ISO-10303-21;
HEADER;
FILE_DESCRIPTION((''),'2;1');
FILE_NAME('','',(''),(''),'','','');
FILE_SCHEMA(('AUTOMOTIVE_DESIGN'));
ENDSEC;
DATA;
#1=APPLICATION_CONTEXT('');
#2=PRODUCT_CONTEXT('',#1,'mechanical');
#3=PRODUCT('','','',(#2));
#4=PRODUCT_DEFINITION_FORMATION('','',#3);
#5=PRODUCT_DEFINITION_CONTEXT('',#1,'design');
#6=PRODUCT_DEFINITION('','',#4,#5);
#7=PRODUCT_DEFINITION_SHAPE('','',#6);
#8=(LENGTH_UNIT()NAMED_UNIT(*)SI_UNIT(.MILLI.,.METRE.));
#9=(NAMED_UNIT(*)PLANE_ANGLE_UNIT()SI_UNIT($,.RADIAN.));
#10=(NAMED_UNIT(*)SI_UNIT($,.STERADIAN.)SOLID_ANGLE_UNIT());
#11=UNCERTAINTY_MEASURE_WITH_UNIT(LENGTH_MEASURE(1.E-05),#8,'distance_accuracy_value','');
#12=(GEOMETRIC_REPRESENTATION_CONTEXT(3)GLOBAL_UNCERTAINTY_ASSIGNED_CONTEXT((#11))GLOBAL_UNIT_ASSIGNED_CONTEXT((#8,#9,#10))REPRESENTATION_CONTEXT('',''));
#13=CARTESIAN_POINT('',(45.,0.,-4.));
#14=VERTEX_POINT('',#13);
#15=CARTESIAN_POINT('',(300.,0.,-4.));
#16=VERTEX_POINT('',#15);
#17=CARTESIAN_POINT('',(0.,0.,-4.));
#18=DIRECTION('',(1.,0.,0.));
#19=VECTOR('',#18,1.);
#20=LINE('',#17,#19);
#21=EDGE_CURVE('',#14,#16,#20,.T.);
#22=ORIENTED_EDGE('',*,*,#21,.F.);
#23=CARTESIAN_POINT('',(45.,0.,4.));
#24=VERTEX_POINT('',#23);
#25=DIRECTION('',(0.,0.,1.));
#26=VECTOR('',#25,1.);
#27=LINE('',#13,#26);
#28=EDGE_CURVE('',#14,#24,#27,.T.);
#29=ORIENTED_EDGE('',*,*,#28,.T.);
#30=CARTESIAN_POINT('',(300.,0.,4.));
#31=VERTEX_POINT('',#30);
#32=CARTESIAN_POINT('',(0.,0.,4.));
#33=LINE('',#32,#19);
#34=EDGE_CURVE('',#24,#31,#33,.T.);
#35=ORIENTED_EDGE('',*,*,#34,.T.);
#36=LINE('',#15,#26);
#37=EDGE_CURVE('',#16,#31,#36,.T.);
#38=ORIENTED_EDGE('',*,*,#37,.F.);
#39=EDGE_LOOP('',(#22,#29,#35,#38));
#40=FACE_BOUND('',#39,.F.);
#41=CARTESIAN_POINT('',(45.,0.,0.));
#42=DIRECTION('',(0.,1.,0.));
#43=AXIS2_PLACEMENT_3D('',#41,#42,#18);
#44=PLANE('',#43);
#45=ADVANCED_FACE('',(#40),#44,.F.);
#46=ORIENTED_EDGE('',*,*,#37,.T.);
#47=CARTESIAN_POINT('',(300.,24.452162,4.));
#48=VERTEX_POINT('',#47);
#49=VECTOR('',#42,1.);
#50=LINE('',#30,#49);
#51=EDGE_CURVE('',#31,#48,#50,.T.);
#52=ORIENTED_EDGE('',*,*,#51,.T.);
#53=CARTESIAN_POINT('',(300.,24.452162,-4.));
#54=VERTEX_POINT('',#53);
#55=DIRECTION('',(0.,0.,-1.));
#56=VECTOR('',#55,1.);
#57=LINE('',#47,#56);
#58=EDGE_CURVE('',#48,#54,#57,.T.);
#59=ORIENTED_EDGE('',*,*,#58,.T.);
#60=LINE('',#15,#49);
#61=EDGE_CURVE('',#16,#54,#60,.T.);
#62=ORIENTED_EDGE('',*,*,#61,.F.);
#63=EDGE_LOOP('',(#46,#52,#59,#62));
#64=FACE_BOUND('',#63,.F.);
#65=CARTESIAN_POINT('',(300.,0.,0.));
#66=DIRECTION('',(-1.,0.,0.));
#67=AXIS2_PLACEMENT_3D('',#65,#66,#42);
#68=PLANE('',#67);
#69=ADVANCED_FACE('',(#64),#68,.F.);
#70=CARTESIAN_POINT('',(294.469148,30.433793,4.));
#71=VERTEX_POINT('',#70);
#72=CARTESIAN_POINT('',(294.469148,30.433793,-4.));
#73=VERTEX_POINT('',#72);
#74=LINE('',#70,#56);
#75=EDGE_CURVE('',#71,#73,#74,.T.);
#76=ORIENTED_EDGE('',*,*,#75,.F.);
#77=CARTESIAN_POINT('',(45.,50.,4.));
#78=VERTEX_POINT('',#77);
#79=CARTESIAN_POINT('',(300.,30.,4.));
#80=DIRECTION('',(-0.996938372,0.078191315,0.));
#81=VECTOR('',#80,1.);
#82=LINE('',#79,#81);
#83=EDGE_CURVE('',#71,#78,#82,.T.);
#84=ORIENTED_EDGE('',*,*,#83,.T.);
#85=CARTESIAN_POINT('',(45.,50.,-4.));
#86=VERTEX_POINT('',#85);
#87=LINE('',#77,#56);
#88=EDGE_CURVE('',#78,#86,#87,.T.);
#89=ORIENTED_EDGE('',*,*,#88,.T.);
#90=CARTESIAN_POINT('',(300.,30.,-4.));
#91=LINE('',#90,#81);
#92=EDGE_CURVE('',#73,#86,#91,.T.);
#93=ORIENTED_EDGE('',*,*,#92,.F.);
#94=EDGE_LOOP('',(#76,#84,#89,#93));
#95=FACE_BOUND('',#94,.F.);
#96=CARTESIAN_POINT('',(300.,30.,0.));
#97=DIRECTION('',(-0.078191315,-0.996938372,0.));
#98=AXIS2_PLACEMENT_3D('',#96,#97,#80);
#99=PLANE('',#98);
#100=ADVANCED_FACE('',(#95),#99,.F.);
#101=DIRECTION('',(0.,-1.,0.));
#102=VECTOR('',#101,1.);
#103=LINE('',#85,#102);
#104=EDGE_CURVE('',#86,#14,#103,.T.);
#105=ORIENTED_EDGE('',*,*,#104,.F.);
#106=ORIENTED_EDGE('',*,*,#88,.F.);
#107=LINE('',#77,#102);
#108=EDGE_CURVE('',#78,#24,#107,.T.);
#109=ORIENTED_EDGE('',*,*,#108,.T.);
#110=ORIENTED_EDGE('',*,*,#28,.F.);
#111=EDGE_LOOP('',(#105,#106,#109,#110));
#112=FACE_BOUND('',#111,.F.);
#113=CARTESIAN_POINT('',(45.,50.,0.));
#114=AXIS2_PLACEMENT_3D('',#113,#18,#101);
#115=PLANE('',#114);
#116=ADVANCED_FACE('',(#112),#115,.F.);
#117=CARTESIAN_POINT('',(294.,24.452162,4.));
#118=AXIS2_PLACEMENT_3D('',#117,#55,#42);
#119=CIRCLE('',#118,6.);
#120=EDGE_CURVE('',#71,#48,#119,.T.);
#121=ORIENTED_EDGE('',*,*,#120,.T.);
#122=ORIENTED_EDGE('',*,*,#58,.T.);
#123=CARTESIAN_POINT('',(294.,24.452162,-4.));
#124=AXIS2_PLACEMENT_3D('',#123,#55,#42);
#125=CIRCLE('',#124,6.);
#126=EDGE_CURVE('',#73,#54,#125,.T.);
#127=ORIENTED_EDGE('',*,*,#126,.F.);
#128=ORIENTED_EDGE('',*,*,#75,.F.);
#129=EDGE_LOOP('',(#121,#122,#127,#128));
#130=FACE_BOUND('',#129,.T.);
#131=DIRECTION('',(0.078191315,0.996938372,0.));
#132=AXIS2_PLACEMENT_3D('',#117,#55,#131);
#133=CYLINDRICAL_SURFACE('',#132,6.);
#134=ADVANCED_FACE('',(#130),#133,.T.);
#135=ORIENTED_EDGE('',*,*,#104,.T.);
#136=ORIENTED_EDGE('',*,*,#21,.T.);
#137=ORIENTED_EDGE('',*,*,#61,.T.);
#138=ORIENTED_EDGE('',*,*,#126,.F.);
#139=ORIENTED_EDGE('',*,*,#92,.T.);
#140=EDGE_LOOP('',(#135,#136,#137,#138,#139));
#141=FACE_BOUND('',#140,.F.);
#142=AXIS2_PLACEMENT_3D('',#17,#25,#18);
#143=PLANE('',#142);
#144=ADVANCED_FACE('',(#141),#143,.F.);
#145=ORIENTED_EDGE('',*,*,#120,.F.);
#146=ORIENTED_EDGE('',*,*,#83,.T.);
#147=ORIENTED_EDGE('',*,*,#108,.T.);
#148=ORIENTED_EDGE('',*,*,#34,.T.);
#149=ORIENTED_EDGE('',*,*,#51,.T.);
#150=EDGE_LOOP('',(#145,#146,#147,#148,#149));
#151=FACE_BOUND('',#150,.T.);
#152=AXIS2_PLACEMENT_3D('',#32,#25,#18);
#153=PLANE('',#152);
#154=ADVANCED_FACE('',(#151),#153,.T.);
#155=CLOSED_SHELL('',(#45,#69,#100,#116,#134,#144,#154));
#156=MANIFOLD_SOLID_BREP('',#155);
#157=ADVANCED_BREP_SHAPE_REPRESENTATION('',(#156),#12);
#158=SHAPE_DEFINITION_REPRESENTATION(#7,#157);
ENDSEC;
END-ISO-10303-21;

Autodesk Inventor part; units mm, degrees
ref_plane "YZ Plane" through (0, 0, 0) normal (1, 0, 0) x (0, 1, 0)
ref_plane "XZ Plane" through (0, 0, 0) normal (0, 1, 0) x (-1, 0, 0)
ref_plane "XY Plane" through (0, 0, 0) normal (0, 0, 1) x (1, 0, 0)
sketch "Sketch3" plane through (0, 0, 0) normal (0, 0, 1) x (1, 0, 0)
  line L0 (0, 0) -> (300, 0)
  line L1 (300, 0) -> (300, 30)
  line L2 (300, 30) -> (-5.542, 53.9641)
  line L3 (45, 50) -> (45, 0)
  dimension "d11" = 300
  dimension "d12" = 30
  dimension "d13" = 45
  dimension "d14" = 50
extrude "Plate1" add sketch "Sketch3" along normal mid plane 8
fillet "Corner Round1" radius 6 1 edges at (300, 30, 0)
equation "\"d15\" = Thickness"
equation "\"BendRadius\" = Thickness"
equation "\"BendReliefWidth\" = Thickness"
equation "\"BendReliefDepth\" = 0.5 * Thickness"
equation "\"CornerReliefSize\" = 4 * Thickness"
equation "\"MinimumRemnant\" = 2 * Thickness"
equation "\"TransitionRadius\" = BendRadius"
equation "\"JacobiRadiusSize\" = BendRadius"
equation "\"GapSize\" = Thickness"
equation "\"Thickness\" = 8"
properties part number "PNS-725 charging hatch reinf D1200" material "Steel"
